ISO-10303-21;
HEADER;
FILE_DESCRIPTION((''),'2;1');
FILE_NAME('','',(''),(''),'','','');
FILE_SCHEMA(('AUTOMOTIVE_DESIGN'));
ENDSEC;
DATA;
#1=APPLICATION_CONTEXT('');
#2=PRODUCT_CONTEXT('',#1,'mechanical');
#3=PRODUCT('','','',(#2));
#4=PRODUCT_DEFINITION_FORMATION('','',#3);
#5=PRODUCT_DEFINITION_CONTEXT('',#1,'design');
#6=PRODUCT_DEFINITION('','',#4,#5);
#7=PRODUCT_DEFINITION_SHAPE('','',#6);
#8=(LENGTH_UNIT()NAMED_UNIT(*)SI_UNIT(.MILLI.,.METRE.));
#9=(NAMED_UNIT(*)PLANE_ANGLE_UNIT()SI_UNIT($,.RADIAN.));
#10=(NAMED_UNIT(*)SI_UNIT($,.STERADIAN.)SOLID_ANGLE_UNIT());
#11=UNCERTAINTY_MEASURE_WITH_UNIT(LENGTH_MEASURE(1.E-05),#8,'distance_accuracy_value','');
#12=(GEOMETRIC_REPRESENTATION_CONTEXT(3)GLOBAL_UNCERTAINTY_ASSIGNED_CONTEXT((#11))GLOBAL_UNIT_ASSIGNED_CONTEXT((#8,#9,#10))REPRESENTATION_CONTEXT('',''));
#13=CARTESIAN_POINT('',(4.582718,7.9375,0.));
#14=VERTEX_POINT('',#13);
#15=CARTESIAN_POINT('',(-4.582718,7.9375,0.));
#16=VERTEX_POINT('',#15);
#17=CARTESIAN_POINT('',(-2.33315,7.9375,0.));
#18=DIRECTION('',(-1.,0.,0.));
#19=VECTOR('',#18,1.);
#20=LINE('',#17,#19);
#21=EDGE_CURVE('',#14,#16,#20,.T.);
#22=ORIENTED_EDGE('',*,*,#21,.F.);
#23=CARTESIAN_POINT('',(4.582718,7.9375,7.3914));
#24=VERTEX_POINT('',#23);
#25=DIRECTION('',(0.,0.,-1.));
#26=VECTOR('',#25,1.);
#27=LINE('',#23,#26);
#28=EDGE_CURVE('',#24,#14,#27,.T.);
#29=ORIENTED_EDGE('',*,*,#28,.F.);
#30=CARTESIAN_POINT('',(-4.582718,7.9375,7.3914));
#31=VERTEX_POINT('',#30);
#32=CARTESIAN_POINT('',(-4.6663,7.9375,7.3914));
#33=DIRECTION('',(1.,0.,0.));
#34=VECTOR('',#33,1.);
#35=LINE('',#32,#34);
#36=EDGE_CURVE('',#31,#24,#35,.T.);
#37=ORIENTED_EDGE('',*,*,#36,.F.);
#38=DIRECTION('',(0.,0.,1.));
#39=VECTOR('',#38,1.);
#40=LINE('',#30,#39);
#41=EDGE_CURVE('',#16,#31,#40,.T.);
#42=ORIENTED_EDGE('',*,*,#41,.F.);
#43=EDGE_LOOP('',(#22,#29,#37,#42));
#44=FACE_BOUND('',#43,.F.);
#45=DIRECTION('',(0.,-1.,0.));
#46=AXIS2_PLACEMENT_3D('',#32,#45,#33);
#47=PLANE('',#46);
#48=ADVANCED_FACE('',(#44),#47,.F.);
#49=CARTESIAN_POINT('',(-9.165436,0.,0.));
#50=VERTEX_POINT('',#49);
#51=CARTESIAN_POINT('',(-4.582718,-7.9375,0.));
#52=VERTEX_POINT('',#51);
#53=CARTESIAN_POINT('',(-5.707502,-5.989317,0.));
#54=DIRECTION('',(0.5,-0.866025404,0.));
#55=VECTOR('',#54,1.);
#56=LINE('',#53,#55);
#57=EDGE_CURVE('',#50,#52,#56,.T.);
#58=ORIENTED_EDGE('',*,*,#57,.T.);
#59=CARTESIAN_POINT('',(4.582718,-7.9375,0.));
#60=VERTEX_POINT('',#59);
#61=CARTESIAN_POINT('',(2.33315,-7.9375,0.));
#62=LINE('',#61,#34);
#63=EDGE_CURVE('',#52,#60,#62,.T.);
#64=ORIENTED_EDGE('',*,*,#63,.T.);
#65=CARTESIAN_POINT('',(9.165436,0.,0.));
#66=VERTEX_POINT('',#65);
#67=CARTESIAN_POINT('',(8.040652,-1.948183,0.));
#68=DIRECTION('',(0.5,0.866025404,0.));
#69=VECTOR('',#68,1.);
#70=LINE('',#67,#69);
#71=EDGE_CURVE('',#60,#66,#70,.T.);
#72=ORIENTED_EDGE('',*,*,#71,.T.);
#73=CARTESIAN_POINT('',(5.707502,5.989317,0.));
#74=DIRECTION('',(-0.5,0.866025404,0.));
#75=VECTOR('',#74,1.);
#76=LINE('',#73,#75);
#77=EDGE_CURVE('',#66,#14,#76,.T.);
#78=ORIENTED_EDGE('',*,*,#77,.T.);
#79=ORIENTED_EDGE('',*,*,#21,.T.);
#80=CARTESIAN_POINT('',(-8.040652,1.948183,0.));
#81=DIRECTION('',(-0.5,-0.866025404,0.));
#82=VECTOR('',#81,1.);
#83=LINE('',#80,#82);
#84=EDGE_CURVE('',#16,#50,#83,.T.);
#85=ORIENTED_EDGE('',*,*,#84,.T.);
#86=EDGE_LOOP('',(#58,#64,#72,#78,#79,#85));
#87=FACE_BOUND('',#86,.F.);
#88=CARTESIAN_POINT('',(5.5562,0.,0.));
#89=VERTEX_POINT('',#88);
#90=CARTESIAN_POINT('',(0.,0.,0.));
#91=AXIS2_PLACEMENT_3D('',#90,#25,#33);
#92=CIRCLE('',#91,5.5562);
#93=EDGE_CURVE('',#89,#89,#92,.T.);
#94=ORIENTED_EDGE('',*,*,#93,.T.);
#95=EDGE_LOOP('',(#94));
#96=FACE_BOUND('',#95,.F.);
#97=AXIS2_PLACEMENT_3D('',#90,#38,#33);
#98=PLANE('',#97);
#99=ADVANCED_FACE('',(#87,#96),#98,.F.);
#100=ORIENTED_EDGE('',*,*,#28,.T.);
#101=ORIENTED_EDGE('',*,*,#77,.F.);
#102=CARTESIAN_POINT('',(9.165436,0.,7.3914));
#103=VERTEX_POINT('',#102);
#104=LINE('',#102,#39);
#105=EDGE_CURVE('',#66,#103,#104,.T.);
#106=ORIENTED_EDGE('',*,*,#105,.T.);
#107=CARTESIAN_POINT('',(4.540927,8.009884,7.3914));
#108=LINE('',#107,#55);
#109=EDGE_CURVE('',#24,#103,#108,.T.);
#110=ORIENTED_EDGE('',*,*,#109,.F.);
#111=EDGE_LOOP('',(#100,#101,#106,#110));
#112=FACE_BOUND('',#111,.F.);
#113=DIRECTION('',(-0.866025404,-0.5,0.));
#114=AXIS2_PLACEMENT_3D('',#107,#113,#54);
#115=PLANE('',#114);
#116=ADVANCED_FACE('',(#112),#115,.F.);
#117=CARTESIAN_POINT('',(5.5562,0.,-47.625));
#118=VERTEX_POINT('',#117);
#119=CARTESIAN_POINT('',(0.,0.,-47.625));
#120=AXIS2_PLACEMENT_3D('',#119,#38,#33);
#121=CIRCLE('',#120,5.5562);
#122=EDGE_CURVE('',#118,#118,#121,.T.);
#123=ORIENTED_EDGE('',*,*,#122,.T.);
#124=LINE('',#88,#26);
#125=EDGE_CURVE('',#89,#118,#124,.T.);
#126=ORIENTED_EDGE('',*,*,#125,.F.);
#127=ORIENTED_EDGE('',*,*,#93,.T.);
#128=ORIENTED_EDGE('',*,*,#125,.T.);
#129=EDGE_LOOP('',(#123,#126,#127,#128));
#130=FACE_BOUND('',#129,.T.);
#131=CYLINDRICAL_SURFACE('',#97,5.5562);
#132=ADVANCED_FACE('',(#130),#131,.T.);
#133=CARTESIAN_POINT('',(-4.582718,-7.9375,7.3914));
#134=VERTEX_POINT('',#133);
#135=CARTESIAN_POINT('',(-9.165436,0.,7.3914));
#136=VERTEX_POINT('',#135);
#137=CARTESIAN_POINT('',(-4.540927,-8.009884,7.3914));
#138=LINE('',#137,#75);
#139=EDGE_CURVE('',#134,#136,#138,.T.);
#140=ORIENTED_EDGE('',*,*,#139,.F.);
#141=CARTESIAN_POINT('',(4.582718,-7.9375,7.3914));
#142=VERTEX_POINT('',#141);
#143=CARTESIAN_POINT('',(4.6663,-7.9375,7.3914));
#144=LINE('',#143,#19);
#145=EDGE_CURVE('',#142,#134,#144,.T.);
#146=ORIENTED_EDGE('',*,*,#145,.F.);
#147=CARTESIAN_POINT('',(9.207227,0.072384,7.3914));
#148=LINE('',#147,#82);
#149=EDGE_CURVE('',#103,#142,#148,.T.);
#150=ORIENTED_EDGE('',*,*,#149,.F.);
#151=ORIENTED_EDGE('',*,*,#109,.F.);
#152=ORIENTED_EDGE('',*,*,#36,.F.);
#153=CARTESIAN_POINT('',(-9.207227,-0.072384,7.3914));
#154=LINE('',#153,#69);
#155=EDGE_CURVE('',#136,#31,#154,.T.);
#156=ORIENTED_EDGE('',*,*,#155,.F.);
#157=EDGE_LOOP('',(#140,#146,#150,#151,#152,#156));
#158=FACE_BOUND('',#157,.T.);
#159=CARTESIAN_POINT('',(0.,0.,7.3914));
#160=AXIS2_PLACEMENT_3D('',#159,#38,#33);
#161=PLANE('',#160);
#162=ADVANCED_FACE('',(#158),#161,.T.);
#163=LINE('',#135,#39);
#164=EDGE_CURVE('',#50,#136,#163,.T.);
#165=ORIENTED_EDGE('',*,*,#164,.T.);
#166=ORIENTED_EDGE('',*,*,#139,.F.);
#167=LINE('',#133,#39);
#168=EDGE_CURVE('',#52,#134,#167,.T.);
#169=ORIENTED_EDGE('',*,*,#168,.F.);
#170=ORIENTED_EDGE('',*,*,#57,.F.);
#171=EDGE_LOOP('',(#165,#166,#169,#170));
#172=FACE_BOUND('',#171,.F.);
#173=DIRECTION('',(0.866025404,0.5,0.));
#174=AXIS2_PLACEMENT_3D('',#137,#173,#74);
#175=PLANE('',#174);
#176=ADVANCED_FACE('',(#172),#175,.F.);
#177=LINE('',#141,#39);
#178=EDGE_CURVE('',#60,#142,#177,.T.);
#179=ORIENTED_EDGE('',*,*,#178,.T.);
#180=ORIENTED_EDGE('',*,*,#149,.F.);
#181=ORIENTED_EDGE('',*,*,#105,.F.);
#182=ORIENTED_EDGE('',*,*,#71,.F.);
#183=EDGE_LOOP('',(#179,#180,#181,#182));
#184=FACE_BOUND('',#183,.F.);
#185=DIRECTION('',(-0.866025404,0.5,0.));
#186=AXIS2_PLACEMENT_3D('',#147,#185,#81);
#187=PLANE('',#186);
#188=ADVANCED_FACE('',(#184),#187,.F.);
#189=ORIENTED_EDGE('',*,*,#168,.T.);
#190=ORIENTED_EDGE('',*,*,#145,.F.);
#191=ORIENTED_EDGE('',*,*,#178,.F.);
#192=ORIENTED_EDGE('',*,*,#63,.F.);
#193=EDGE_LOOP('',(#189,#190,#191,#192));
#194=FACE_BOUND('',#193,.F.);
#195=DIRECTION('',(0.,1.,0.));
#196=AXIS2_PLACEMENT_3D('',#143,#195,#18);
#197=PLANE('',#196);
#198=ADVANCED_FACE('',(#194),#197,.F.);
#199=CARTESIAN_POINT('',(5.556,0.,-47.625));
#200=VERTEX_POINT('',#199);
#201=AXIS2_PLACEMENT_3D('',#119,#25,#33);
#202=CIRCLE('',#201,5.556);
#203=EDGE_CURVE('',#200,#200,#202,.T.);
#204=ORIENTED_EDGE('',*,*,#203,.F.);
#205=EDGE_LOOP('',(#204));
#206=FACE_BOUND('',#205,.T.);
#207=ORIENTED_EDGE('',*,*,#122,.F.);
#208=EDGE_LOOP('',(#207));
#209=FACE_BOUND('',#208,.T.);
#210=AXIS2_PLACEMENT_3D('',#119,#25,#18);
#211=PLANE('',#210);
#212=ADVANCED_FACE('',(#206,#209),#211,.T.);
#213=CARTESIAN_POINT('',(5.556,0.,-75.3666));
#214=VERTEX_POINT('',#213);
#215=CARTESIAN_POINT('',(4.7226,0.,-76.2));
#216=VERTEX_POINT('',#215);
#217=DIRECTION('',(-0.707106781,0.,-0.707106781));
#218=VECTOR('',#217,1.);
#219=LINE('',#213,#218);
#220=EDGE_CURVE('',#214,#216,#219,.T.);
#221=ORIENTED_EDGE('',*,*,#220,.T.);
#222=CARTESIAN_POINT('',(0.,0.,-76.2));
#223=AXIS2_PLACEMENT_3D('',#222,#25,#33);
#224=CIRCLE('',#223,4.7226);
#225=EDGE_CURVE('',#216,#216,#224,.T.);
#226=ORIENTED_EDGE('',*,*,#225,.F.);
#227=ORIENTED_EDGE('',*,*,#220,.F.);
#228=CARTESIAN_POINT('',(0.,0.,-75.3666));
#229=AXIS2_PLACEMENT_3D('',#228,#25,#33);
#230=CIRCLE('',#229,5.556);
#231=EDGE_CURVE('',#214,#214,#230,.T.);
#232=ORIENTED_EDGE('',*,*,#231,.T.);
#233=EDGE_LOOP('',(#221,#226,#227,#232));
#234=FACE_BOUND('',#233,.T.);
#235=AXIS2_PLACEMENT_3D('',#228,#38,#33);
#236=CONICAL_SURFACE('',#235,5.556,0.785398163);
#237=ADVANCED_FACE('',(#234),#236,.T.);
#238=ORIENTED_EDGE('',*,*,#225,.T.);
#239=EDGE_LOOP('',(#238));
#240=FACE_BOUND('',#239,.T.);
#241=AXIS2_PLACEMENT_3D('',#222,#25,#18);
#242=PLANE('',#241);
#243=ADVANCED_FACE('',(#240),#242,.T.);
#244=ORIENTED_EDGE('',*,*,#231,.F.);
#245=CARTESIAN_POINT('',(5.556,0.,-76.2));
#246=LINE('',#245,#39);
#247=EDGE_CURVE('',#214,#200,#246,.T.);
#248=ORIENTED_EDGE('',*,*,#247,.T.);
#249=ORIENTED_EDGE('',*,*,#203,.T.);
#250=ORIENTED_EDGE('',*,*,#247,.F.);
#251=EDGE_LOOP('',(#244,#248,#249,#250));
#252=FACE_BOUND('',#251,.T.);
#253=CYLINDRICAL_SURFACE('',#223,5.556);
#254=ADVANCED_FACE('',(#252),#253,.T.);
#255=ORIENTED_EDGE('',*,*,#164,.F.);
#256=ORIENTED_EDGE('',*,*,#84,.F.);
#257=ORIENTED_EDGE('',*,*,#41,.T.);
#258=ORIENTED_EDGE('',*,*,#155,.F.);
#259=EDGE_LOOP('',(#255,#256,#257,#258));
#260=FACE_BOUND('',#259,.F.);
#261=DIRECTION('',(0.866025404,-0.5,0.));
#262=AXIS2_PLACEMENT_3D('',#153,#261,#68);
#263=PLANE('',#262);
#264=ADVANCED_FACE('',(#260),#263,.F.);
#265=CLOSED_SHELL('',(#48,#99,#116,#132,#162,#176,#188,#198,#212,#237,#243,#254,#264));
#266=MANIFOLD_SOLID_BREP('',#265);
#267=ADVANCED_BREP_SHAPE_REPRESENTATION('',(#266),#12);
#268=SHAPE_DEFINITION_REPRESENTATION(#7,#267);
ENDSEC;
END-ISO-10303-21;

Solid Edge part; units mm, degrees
sketch "Sketch1" plane through (0, 0, 0) normal (0, 0, 1) x (1, 0, 0)
  circle A0 centre (0, 0) radius 9.2075
  dimension "D1" = 18.415
extrude "Protrusion1" add sketch "Sketch1" along normal blind 7.3914
sketch "Sketch2" plane through (0, 0, 0) normal (0, 0, -1) x (1, 0, 0)
  circle A0 centre (0, 0) radius 5.5562
extrude "Protrusion2" add sketch "Sketch2" along normal blind 76.2
sketch "Sketch3" plane through (0, 0, -76.2) normal (0, 0, -1) x (1, 0, 0)
  circle A0 centre (0, 0) radius 5.556
extrude "Cutout1" cut sketch "Sketch3" against normal blind 28.575 flip side to cut
chamfer "Chamfer_1" distance 0.8334 angle 45 1 edges at (-5.556, 0, -76.2)
sketch "Sketch4" plane through (0, 0, 7.3914) normal (0, 0, 1) x (1, 0, 0)
  line L0 (-4.6663, 7.9375) -> (4.6663, 7.9375)
  dimension "D1" = 15.875
extrude "Cutout2" cut sketch "Sketch4" against normal up to next material side at (0, 7.9875, 7.3914)
pattern_circular "Pattern1" count 6 over 360 about axis through (0, 0, 7.3914) along (0, 0, 1) of "Cutout2"
properties part number "24100026"
